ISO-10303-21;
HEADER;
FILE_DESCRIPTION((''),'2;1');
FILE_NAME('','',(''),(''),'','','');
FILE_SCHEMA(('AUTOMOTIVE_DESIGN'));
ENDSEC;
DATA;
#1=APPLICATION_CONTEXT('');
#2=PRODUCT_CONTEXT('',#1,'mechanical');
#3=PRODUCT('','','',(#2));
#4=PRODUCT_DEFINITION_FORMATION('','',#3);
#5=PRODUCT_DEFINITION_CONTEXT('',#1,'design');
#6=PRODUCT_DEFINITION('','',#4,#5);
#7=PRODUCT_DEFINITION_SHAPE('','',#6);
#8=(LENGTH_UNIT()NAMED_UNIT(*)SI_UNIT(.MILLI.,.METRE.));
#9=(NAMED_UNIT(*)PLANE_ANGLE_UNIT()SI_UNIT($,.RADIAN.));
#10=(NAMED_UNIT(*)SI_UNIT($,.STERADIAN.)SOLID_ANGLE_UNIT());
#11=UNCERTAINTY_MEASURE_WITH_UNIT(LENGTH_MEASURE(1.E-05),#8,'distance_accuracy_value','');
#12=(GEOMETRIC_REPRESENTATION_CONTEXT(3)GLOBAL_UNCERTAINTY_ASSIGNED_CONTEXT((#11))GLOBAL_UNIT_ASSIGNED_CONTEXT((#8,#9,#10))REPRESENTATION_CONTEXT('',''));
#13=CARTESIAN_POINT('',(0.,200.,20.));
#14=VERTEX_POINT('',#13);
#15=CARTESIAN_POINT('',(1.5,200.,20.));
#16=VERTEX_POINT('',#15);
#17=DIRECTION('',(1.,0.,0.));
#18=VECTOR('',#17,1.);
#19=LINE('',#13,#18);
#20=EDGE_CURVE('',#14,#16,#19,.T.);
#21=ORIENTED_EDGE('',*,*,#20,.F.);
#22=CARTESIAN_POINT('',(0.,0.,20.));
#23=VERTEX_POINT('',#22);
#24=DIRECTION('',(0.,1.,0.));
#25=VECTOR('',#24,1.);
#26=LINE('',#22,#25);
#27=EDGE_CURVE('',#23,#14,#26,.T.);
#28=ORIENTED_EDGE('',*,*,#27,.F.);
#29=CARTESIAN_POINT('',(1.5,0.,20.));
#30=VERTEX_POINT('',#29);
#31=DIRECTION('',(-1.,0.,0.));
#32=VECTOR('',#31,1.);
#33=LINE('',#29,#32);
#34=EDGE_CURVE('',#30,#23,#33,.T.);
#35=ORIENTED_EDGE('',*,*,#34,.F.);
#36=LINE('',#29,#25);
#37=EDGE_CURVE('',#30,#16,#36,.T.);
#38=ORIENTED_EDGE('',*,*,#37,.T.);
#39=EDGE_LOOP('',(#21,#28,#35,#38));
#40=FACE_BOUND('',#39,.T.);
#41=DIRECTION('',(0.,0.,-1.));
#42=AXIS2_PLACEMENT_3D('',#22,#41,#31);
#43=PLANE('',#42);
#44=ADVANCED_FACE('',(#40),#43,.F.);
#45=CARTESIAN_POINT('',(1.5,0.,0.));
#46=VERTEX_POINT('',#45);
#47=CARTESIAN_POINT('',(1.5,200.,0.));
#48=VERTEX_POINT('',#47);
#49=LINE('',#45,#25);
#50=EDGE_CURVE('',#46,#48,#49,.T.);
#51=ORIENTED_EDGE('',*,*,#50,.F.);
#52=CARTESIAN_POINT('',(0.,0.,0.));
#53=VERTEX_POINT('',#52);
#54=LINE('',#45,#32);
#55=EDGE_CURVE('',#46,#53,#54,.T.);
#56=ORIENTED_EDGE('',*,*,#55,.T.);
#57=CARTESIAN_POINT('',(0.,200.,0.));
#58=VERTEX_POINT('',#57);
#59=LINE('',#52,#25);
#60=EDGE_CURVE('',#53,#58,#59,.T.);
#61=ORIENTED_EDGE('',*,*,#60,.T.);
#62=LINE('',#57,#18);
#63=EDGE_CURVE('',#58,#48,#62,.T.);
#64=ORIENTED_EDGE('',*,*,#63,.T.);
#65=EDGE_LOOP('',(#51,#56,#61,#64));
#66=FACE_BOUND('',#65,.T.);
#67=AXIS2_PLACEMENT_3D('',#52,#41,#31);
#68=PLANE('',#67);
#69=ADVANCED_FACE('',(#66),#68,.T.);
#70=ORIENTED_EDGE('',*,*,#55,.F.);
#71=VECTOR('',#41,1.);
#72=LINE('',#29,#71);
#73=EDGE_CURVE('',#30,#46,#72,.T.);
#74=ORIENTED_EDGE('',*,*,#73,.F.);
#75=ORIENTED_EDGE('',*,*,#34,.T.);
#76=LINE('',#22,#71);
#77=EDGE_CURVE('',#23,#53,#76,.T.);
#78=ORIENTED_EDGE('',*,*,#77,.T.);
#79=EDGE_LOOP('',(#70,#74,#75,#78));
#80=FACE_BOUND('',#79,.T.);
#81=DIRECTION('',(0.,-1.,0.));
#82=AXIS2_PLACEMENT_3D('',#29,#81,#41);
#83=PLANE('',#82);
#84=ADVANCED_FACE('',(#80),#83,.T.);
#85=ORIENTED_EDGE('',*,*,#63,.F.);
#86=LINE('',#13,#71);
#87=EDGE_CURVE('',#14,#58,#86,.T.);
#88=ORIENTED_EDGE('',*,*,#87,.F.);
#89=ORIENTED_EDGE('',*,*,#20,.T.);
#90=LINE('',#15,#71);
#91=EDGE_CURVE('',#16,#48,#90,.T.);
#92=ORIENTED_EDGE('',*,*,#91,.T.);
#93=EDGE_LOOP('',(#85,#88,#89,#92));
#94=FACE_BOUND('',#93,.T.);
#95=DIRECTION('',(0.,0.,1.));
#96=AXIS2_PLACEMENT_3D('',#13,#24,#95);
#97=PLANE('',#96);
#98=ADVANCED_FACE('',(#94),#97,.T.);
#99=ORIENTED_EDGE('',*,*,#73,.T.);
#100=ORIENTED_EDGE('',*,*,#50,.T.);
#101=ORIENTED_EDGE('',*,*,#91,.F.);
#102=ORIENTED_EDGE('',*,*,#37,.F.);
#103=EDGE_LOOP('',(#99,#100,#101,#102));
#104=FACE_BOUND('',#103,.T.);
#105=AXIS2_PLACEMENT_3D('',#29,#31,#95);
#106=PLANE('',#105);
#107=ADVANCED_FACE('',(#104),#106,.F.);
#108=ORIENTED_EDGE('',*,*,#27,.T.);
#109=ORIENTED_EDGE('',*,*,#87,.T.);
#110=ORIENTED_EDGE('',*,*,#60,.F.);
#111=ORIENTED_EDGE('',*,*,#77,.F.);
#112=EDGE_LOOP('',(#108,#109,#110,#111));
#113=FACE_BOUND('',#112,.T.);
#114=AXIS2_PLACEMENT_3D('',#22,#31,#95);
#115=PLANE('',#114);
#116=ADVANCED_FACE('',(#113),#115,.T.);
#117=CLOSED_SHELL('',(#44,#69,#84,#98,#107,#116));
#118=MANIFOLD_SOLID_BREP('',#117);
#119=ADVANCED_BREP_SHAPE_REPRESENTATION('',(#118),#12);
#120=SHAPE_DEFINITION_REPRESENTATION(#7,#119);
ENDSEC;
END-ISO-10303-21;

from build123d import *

# Parameters (mm, degrees)
SKETCH_2_W             = 1.5
SKETCH_2_H             = 200
SM_BASE_FLANGE_1_DEPTH = 20


# Sheet-metal steps are written as plain solids
with BuildPart() as part:
    # Sketch 2 → 基体-法兰1 (new body)
    with BuildSketch(Plane.XY):
        with Locations((0.75, 100)):
            Rectangle(SKETCH_2_W, SKETCH_2_H)
    extrude(amount=SM_BASE_FLANGE_1_DEPTH)


solid = part.part
